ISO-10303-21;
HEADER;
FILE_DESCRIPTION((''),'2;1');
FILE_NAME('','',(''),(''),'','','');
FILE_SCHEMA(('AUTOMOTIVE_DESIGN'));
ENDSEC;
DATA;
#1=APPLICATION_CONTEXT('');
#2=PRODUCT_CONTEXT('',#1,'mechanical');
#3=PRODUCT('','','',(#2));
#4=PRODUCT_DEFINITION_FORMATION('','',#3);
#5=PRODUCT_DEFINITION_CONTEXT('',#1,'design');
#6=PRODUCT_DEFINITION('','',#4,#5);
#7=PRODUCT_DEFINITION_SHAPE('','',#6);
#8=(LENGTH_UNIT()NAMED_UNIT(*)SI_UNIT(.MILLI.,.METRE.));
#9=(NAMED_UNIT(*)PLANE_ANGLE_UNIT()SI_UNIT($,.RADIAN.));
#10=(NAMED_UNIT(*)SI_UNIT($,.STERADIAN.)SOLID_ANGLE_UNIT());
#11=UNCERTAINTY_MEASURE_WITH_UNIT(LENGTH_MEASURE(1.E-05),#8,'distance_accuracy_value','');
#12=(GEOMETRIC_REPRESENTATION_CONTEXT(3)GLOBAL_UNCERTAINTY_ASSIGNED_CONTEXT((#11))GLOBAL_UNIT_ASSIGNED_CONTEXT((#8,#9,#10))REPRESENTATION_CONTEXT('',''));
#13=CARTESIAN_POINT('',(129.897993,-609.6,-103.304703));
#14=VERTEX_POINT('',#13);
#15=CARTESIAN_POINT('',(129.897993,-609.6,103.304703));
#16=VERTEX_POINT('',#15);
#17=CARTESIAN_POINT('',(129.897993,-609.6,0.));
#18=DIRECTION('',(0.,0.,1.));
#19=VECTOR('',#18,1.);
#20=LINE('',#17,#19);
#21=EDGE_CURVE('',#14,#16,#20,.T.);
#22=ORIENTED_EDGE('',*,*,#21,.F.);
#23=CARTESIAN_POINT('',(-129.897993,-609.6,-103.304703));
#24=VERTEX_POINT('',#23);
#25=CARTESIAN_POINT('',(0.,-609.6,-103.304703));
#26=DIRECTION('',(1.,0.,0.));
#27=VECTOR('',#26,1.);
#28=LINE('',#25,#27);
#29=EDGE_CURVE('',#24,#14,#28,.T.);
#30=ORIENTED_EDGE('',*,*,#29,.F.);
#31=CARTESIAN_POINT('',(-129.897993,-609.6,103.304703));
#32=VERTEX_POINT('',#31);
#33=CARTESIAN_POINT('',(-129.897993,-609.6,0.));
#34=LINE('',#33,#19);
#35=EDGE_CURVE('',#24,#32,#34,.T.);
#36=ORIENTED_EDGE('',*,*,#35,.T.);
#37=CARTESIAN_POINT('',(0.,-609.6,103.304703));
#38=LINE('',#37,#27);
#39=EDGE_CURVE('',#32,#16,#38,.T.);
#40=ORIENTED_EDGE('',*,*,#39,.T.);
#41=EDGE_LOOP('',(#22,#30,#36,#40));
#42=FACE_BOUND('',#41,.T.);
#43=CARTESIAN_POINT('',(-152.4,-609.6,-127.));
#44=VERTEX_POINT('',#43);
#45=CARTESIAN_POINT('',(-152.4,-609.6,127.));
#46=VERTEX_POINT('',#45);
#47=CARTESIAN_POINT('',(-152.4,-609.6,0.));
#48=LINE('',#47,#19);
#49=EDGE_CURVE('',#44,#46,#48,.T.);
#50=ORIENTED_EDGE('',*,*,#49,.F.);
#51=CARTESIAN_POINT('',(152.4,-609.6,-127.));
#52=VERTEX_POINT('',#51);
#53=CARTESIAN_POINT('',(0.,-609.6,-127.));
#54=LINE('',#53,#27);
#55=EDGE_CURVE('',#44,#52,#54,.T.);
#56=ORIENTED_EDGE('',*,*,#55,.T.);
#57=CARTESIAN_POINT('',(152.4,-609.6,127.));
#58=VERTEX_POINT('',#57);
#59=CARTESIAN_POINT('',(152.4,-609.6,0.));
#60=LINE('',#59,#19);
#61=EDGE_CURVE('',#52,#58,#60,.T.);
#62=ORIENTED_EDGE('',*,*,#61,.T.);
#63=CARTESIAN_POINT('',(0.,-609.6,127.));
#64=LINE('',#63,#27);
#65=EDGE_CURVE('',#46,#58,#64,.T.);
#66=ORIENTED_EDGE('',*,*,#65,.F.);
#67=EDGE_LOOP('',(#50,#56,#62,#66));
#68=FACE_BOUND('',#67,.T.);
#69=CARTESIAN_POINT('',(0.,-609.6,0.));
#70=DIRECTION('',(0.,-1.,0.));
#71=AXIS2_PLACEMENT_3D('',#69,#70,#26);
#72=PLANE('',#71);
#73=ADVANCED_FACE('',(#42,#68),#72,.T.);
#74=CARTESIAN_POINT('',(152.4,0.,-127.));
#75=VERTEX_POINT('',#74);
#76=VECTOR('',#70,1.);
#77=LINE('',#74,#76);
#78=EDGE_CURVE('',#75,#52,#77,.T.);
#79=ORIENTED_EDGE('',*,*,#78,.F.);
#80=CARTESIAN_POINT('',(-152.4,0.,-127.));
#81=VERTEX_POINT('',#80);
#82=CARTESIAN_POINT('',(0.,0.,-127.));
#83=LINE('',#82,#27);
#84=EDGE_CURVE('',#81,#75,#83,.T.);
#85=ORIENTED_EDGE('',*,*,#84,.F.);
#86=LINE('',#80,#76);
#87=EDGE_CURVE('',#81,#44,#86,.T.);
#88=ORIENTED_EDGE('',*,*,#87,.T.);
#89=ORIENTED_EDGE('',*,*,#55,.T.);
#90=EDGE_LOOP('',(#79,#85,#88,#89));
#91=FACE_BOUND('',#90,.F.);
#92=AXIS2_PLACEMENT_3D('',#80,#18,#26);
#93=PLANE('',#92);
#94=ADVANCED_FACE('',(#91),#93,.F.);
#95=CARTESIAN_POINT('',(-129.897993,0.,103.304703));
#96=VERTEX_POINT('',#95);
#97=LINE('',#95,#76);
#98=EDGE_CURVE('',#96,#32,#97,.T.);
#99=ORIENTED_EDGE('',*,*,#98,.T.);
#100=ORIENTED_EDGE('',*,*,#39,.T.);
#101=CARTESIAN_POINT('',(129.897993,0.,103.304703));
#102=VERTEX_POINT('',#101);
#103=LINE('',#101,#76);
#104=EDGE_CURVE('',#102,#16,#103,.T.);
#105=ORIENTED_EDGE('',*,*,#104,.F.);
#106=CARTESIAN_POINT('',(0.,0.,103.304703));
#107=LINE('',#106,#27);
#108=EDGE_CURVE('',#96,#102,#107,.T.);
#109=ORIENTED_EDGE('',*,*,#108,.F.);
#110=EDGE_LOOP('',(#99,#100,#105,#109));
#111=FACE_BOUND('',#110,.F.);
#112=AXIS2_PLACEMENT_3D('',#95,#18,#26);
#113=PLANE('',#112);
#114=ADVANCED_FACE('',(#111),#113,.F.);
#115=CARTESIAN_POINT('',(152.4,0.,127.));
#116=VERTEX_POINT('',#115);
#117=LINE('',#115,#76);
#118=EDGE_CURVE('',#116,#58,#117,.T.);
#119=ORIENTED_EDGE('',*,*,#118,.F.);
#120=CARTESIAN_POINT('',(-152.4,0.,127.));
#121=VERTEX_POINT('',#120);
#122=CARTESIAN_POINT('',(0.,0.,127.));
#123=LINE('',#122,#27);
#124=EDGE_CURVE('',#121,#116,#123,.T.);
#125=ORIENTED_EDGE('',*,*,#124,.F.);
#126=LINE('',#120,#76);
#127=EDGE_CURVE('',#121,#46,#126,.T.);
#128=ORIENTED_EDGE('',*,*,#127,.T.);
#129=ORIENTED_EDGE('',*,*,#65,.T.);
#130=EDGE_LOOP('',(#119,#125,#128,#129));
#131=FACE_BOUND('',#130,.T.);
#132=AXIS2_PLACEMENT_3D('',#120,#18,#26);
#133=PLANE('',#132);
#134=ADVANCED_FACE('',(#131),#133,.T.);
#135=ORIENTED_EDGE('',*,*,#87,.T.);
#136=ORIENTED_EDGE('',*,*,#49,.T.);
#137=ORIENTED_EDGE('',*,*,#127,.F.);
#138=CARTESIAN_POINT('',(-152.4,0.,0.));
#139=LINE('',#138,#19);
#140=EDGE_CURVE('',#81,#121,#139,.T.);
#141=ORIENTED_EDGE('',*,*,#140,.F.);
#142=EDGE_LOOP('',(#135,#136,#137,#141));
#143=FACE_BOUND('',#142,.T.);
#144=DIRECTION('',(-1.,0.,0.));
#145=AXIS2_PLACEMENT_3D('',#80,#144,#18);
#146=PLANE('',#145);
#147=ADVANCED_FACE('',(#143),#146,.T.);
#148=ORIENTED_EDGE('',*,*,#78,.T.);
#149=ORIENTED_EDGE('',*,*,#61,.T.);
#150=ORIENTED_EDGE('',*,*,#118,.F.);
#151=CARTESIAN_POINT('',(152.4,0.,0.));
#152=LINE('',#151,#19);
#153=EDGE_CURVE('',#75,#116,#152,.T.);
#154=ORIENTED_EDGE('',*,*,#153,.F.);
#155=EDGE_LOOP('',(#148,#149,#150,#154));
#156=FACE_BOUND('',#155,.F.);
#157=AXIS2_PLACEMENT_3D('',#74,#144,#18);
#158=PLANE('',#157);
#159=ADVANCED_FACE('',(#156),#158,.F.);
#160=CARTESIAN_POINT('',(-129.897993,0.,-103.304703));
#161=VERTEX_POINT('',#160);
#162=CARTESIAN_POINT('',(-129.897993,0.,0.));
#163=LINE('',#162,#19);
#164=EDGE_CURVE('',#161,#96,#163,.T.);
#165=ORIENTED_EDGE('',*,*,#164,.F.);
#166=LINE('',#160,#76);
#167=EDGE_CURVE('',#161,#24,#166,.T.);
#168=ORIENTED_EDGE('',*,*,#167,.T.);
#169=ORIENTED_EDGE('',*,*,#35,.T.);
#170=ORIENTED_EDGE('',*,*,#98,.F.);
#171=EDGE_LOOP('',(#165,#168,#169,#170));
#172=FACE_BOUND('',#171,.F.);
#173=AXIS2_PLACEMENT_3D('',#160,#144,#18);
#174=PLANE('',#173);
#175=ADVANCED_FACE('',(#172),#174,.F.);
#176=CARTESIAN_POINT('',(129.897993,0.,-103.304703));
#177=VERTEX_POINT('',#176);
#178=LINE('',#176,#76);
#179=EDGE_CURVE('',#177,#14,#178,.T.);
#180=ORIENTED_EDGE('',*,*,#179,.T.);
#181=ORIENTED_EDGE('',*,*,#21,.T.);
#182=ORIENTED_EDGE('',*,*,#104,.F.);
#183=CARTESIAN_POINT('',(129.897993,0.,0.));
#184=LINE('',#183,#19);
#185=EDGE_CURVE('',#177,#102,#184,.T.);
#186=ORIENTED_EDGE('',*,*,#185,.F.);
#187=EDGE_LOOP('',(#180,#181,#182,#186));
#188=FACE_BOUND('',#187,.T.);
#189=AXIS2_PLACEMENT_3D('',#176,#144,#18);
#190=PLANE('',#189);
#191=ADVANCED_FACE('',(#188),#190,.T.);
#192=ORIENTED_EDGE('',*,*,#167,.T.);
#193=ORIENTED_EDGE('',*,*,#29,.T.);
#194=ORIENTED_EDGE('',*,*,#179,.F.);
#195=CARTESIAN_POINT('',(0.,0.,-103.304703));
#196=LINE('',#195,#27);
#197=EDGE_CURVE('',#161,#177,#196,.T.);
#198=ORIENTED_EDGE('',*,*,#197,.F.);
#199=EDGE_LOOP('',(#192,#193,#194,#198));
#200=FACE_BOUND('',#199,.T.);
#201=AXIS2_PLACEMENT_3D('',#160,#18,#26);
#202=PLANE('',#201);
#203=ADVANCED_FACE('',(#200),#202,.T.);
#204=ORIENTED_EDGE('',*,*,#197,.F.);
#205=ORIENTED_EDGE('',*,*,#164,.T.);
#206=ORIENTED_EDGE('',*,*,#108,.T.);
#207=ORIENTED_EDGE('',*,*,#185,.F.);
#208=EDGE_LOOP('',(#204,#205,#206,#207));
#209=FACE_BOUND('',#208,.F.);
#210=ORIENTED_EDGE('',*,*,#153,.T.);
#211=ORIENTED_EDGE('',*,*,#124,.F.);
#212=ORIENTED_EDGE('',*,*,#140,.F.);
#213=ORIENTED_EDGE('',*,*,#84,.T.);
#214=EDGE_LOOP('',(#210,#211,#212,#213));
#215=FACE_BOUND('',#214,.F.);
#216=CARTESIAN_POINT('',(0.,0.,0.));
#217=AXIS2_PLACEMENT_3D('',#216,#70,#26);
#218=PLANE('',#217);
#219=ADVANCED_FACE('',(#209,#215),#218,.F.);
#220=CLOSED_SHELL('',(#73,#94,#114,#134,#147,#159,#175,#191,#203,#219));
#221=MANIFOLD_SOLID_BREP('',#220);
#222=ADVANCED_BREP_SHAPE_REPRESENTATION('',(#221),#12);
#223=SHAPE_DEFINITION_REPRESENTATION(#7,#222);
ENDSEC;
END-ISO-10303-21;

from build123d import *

# Parameters (mm, degrees)
F0_W     = 304.8
F0_H     = 254
F0_W_2   = 259.7959858463
F0_H_2   = 206.6094064729
F1_DEPTH = 609.6


# Not quite as in the source:
# - the program builds the solid bodies; features that only make, move or delete a surface that nothing else refers to are left out


with BuildPart() as f1:
    # F0 (on Front) → F1 (new body)
    with BuildSketch(Plane.XZ):
        Rectangle(F0_W, F0_H)
        Rectangle(F0_W_2, F0_H_2, mode=Mode.SUBTRACT)
    extrude(amount=F1_DEPTH)


solid = f1.part
